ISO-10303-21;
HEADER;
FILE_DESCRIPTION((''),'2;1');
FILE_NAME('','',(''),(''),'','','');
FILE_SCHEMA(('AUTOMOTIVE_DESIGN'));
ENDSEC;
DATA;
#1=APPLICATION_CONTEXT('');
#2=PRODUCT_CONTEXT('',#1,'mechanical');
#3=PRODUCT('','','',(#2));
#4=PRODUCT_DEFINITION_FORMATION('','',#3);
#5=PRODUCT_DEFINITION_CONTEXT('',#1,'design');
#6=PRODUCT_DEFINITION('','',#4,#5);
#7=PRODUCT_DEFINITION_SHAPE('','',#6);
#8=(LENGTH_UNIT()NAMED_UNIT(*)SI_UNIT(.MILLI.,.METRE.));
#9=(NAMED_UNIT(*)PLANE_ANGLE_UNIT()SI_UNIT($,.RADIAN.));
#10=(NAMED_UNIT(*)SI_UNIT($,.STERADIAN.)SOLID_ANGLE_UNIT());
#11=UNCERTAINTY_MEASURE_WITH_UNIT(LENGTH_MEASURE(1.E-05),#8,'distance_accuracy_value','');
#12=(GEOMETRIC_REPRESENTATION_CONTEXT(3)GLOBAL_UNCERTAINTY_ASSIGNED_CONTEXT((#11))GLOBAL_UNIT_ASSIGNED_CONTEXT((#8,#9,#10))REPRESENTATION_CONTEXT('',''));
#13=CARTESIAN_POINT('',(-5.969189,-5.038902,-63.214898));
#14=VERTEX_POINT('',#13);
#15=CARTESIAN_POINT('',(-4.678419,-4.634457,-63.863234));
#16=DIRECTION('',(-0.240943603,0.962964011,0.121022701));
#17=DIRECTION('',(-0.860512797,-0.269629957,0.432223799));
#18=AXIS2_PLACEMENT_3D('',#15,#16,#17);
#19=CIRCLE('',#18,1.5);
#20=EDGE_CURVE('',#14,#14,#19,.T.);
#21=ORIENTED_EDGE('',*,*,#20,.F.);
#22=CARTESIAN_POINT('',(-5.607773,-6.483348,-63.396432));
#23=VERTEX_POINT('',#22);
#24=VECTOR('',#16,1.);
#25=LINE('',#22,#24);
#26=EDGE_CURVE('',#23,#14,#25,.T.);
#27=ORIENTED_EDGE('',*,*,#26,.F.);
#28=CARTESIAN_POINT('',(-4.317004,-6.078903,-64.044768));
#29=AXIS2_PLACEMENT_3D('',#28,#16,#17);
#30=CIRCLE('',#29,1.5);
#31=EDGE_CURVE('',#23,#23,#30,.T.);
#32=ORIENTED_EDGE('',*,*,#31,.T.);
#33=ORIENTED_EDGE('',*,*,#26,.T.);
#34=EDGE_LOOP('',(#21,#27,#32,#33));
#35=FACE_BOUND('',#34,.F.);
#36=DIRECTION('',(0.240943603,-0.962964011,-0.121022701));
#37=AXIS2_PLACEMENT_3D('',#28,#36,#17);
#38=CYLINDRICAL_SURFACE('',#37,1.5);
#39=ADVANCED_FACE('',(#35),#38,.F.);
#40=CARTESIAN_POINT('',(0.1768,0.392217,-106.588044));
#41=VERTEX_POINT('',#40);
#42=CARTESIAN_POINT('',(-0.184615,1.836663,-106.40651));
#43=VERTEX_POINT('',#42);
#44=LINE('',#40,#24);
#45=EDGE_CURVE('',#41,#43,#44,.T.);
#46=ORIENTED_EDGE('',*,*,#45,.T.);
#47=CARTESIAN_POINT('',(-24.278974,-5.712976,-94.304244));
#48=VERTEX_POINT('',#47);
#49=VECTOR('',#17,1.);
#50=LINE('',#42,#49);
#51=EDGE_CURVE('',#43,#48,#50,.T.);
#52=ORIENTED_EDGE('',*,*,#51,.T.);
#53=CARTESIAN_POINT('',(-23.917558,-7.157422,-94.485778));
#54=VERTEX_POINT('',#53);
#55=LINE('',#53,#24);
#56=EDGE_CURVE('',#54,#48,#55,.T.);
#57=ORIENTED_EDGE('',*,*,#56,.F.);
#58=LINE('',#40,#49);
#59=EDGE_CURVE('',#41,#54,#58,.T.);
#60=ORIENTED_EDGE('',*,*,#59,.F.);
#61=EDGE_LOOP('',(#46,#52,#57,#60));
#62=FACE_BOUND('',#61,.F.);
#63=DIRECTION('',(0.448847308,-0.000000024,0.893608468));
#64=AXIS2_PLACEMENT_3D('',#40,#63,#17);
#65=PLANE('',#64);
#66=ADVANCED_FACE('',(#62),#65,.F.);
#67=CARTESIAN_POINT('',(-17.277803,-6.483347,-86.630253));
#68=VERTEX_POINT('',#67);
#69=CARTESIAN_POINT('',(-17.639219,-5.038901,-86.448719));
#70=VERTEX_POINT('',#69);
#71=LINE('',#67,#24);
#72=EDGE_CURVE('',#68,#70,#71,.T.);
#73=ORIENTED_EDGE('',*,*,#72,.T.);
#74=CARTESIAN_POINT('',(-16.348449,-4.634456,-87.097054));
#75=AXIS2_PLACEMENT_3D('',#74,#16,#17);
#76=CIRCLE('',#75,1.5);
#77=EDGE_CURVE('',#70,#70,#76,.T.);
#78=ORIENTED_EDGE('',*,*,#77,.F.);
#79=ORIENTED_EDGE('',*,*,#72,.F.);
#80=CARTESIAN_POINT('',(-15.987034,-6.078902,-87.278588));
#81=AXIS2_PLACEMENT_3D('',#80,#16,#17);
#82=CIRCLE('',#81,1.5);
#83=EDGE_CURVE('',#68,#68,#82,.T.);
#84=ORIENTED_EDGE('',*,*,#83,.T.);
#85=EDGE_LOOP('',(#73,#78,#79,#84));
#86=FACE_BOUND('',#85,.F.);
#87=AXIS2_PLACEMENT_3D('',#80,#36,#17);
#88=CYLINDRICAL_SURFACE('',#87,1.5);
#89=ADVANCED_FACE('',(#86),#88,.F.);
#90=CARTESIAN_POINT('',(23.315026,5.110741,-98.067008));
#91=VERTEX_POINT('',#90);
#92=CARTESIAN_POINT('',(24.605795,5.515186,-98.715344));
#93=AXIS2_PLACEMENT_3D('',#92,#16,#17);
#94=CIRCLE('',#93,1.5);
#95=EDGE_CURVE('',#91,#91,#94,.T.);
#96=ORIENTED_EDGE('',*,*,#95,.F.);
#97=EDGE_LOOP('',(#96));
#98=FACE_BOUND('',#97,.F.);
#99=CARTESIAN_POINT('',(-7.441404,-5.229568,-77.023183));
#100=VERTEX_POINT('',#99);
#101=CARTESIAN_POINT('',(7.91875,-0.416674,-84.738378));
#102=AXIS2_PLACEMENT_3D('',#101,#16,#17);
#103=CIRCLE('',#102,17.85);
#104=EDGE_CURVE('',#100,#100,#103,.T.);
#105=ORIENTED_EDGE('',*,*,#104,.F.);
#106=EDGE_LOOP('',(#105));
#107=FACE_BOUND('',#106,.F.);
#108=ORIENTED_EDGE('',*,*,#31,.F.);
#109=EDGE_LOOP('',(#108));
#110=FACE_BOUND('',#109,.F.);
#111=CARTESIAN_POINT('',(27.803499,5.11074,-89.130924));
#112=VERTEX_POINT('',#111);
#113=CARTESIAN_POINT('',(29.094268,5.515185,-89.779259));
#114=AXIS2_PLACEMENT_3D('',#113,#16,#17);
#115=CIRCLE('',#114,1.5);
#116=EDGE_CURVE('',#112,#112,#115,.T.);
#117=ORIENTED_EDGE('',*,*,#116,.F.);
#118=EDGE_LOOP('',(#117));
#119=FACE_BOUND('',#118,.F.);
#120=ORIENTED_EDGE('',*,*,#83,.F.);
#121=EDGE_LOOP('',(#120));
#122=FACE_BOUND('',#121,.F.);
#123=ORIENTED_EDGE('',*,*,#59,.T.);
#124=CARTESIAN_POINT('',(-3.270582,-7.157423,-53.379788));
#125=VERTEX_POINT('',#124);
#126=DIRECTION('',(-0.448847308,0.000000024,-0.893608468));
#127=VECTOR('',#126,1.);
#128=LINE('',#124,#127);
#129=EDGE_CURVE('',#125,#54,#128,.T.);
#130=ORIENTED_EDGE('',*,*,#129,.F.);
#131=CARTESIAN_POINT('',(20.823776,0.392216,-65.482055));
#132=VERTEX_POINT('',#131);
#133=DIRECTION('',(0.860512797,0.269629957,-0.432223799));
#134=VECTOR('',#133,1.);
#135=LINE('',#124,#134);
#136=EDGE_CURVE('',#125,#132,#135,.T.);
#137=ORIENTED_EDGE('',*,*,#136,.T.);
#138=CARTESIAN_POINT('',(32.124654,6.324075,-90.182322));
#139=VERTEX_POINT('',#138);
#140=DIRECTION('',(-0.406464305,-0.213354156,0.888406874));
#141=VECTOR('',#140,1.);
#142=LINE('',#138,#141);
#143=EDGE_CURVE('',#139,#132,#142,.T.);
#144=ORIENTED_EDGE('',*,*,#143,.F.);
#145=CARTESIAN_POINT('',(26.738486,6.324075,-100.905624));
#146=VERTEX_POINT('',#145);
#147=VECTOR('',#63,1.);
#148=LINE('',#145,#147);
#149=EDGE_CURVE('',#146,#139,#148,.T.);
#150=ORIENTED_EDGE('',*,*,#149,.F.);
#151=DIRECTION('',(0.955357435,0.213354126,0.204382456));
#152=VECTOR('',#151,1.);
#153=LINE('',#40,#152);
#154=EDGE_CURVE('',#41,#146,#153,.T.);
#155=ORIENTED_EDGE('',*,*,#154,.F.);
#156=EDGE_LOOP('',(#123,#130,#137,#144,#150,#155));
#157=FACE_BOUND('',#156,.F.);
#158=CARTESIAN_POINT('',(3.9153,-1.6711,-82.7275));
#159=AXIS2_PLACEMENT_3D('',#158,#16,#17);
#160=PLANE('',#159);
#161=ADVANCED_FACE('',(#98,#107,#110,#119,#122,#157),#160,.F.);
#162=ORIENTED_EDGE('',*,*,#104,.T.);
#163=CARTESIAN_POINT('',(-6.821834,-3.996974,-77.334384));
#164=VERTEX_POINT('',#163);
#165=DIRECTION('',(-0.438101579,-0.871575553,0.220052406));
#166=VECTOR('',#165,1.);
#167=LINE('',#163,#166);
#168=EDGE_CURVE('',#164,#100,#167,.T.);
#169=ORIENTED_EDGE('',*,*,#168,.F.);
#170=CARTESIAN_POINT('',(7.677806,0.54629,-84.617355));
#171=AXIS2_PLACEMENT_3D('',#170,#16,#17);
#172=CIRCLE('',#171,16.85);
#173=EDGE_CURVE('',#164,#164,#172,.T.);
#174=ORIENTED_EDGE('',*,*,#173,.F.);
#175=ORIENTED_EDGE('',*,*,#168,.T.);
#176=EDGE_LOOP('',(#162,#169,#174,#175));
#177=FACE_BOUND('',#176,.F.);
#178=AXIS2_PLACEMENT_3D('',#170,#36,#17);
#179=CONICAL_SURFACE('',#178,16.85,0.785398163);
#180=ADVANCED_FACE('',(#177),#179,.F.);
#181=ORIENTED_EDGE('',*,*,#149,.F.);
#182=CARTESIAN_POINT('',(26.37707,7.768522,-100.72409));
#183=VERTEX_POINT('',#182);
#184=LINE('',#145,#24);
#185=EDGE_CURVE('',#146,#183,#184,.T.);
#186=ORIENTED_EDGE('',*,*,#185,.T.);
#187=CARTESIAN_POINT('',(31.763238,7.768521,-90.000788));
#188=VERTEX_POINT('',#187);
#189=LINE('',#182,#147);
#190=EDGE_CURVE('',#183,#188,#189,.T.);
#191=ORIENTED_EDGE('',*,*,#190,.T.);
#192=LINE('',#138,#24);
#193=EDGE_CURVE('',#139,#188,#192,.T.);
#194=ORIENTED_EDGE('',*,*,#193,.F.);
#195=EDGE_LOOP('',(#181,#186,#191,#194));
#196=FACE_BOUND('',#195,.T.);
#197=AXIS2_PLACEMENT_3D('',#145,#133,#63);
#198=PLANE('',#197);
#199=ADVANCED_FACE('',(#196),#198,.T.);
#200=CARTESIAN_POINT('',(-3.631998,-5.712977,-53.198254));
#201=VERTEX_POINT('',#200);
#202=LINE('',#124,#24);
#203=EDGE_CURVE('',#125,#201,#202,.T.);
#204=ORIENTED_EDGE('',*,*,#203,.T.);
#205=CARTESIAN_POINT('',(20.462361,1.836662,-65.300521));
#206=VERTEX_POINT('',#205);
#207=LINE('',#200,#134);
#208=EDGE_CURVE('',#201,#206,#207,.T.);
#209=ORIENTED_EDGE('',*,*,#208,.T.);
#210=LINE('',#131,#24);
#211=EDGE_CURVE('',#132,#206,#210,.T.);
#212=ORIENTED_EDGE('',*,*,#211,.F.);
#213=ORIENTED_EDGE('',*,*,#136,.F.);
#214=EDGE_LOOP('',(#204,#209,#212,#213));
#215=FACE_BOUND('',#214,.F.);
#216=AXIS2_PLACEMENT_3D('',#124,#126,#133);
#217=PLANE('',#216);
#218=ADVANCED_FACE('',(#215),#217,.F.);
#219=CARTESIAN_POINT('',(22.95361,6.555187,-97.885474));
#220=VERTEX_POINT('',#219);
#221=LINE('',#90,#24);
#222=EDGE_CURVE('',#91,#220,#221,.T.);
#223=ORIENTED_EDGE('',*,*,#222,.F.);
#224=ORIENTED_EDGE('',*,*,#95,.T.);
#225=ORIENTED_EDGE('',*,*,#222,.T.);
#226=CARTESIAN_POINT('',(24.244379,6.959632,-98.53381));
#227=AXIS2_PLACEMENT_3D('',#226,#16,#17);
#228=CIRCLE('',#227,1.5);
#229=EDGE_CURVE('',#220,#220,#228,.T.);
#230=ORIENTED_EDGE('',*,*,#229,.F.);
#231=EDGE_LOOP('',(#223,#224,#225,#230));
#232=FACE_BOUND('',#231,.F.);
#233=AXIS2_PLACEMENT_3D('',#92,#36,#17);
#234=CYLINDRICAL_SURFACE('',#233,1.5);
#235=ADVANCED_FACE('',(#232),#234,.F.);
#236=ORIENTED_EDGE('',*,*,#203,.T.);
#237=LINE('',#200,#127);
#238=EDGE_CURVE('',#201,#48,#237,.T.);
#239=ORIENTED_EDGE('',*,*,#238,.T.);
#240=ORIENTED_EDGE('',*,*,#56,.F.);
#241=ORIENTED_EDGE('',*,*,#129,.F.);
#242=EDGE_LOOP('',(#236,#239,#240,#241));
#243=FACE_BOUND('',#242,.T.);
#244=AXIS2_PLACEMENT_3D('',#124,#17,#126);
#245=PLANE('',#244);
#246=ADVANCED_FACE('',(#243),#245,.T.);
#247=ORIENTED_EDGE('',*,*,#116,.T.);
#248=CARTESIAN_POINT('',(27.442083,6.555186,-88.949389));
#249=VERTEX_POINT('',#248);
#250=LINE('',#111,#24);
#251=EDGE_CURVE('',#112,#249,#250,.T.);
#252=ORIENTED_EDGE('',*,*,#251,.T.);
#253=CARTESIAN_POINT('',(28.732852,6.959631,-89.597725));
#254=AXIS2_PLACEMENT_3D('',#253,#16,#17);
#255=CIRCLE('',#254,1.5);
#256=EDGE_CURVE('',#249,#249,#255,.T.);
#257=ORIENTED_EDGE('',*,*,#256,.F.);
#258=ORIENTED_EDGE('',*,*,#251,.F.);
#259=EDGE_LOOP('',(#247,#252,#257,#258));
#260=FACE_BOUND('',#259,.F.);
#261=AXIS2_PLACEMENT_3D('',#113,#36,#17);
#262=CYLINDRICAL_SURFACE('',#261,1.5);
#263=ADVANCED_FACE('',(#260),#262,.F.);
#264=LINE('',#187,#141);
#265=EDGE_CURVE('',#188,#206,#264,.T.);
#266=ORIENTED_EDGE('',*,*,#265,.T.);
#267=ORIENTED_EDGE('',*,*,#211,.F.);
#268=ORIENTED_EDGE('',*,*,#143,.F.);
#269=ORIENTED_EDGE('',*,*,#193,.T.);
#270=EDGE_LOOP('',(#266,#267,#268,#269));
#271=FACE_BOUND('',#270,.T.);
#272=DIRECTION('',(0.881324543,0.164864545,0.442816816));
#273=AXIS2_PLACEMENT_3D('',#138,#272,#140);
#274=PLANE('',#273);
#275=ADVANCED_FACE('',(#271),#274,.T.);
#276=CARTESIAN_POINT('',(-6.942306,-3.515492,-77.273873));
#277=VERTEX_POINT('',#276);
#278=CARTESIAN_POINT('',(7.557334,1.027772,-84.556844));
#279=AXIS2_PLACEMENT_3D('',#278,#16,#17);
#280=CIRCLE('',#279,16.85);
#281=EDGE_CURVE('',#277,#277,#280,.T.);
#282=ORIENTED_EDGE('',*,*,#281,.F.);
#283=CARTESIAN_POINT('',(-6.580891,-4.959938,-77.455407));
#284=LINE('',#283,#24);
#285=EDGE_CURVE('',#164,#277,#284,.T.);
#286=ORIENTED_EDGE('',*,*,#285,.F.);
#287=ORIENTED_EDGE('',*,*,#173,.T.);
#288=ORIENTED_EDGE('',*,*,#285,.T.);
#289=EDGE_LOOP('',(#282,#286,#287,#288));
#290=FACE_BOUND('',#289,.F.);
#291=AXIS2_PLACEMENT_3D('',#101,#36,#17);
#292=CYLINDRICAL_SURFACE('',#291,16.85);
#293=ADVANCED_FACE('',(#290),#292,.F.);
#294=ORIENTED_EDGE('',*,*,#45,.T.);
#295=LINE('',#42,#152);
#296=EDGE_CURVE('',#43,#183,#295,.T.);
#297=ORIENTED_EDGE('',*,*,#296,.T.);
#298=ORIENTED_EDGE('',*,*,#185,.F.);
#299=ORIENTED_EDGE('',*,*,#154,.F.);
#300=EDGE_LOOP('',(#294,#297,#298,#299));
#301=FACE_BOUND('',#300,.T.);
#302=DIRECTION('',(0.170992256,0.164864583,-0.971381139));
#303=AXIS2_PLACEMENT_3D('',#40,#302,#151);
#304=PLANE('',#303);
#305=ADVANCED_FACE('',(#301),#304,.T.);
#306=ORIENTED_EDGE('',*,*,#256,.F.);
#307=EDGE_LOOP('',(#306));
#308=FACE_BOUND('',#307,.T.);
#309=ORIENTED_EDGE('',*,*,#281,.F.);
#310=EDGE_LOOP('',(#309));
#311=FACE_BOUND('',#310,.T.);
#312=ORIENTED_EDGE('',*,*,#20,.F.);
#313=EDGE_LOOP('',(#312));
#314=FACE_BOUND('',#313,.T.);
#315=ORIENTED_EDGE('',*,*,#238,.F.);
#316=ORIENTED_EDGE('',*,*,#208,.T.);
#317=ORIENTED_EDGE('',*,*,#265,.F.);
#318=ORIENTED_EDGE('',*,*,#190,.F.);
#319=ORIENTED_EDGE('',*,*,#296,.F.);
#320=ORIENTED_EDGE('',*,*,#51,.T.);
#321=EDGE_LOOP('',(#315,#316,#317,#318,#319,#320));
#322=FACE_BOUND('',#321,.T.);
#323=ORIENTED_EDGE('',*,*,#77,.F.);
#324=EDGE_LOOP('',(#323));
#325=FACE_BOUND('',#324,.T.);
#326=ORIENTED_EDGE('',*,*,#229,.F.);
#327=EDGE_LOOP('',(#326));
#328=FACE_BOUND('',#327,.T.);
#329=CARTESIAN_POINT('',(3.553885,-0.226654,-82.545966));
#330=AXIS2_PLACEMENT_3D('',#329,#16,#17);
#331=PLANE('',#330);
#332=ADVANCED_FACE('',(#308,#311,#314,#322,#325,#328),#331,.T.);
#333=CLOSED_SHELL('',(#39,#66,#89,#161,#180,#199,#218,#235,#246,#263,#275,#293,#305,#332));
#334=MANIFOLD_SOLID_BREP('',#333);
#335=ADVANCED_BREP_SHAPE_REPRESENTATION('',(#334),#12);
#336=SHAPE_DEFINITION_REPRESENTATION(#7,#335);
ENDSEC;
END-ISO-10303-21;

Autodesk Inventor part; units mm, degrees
ref_plane "YZ Plane" through (0, 0, 0) normal (1, 0, 0) x (0, 1, 0)
ref_plane "XZ Plane" through (0, 0, 0) normal (0, 1, 0) x (-1, 0, 0)
ref_plane "作業平面2" through (3.9153, -1.6711, -82.7275) normal (-0.2409436, 0.962964, 0.1210227) x (-0.8605128, -0.2696299, 0.4322238)
sketch "スケッチ1" plane through (3.9153, -1.6711, -82.7275) normal (-0.2409436, 0.962964, 0.1210227) x (-0.8605128, -0.2696299, 0.4322238)
  arc A0 (-22.541, -2) -> (2.5598, -16.4919) centre (-4.6524, 0) ccw projected
  line L0 (-7.6524, -23) -> (-29.6524, -6) projected
  line L1 (-29.6524, -6) -> (-29.6524, 6) projected
  line L2 (-29.6524, 6) -> (-7.6524, 23) projected
  line L3 (20.3476, 23) -> (-7.6524, 23) projected
  line L4 (20.3476, 23) -> (20.3476, -23) projected
  line L5 (-7.6524, -23) -> (20.3476, -23) projected
  circle A1 centre (16.3476, 13) radius 1.5 projected
  circle A2 centre (16.3476, -13) radius 1.5 projected
  circle A3 centre (-26.6524, -5) radius 1.5 projected
  circle A4 centre (-26.6524, 5) radius 1.5 projected
  circle A5 centre (-4.6524, 0) radius 16.85
  point P0 (38.6754, 72.1686)
  dimension "d0" = 33.7
extrude "押し出し1" add sketch "スケッチ1" along normal blind 1.5
chamfer "面取り1" distance 1 angle 45 1 edges at (22.4184, 4.1266, -92.0214)
properties part number "ballcover" material "アルミニウム 6061"
